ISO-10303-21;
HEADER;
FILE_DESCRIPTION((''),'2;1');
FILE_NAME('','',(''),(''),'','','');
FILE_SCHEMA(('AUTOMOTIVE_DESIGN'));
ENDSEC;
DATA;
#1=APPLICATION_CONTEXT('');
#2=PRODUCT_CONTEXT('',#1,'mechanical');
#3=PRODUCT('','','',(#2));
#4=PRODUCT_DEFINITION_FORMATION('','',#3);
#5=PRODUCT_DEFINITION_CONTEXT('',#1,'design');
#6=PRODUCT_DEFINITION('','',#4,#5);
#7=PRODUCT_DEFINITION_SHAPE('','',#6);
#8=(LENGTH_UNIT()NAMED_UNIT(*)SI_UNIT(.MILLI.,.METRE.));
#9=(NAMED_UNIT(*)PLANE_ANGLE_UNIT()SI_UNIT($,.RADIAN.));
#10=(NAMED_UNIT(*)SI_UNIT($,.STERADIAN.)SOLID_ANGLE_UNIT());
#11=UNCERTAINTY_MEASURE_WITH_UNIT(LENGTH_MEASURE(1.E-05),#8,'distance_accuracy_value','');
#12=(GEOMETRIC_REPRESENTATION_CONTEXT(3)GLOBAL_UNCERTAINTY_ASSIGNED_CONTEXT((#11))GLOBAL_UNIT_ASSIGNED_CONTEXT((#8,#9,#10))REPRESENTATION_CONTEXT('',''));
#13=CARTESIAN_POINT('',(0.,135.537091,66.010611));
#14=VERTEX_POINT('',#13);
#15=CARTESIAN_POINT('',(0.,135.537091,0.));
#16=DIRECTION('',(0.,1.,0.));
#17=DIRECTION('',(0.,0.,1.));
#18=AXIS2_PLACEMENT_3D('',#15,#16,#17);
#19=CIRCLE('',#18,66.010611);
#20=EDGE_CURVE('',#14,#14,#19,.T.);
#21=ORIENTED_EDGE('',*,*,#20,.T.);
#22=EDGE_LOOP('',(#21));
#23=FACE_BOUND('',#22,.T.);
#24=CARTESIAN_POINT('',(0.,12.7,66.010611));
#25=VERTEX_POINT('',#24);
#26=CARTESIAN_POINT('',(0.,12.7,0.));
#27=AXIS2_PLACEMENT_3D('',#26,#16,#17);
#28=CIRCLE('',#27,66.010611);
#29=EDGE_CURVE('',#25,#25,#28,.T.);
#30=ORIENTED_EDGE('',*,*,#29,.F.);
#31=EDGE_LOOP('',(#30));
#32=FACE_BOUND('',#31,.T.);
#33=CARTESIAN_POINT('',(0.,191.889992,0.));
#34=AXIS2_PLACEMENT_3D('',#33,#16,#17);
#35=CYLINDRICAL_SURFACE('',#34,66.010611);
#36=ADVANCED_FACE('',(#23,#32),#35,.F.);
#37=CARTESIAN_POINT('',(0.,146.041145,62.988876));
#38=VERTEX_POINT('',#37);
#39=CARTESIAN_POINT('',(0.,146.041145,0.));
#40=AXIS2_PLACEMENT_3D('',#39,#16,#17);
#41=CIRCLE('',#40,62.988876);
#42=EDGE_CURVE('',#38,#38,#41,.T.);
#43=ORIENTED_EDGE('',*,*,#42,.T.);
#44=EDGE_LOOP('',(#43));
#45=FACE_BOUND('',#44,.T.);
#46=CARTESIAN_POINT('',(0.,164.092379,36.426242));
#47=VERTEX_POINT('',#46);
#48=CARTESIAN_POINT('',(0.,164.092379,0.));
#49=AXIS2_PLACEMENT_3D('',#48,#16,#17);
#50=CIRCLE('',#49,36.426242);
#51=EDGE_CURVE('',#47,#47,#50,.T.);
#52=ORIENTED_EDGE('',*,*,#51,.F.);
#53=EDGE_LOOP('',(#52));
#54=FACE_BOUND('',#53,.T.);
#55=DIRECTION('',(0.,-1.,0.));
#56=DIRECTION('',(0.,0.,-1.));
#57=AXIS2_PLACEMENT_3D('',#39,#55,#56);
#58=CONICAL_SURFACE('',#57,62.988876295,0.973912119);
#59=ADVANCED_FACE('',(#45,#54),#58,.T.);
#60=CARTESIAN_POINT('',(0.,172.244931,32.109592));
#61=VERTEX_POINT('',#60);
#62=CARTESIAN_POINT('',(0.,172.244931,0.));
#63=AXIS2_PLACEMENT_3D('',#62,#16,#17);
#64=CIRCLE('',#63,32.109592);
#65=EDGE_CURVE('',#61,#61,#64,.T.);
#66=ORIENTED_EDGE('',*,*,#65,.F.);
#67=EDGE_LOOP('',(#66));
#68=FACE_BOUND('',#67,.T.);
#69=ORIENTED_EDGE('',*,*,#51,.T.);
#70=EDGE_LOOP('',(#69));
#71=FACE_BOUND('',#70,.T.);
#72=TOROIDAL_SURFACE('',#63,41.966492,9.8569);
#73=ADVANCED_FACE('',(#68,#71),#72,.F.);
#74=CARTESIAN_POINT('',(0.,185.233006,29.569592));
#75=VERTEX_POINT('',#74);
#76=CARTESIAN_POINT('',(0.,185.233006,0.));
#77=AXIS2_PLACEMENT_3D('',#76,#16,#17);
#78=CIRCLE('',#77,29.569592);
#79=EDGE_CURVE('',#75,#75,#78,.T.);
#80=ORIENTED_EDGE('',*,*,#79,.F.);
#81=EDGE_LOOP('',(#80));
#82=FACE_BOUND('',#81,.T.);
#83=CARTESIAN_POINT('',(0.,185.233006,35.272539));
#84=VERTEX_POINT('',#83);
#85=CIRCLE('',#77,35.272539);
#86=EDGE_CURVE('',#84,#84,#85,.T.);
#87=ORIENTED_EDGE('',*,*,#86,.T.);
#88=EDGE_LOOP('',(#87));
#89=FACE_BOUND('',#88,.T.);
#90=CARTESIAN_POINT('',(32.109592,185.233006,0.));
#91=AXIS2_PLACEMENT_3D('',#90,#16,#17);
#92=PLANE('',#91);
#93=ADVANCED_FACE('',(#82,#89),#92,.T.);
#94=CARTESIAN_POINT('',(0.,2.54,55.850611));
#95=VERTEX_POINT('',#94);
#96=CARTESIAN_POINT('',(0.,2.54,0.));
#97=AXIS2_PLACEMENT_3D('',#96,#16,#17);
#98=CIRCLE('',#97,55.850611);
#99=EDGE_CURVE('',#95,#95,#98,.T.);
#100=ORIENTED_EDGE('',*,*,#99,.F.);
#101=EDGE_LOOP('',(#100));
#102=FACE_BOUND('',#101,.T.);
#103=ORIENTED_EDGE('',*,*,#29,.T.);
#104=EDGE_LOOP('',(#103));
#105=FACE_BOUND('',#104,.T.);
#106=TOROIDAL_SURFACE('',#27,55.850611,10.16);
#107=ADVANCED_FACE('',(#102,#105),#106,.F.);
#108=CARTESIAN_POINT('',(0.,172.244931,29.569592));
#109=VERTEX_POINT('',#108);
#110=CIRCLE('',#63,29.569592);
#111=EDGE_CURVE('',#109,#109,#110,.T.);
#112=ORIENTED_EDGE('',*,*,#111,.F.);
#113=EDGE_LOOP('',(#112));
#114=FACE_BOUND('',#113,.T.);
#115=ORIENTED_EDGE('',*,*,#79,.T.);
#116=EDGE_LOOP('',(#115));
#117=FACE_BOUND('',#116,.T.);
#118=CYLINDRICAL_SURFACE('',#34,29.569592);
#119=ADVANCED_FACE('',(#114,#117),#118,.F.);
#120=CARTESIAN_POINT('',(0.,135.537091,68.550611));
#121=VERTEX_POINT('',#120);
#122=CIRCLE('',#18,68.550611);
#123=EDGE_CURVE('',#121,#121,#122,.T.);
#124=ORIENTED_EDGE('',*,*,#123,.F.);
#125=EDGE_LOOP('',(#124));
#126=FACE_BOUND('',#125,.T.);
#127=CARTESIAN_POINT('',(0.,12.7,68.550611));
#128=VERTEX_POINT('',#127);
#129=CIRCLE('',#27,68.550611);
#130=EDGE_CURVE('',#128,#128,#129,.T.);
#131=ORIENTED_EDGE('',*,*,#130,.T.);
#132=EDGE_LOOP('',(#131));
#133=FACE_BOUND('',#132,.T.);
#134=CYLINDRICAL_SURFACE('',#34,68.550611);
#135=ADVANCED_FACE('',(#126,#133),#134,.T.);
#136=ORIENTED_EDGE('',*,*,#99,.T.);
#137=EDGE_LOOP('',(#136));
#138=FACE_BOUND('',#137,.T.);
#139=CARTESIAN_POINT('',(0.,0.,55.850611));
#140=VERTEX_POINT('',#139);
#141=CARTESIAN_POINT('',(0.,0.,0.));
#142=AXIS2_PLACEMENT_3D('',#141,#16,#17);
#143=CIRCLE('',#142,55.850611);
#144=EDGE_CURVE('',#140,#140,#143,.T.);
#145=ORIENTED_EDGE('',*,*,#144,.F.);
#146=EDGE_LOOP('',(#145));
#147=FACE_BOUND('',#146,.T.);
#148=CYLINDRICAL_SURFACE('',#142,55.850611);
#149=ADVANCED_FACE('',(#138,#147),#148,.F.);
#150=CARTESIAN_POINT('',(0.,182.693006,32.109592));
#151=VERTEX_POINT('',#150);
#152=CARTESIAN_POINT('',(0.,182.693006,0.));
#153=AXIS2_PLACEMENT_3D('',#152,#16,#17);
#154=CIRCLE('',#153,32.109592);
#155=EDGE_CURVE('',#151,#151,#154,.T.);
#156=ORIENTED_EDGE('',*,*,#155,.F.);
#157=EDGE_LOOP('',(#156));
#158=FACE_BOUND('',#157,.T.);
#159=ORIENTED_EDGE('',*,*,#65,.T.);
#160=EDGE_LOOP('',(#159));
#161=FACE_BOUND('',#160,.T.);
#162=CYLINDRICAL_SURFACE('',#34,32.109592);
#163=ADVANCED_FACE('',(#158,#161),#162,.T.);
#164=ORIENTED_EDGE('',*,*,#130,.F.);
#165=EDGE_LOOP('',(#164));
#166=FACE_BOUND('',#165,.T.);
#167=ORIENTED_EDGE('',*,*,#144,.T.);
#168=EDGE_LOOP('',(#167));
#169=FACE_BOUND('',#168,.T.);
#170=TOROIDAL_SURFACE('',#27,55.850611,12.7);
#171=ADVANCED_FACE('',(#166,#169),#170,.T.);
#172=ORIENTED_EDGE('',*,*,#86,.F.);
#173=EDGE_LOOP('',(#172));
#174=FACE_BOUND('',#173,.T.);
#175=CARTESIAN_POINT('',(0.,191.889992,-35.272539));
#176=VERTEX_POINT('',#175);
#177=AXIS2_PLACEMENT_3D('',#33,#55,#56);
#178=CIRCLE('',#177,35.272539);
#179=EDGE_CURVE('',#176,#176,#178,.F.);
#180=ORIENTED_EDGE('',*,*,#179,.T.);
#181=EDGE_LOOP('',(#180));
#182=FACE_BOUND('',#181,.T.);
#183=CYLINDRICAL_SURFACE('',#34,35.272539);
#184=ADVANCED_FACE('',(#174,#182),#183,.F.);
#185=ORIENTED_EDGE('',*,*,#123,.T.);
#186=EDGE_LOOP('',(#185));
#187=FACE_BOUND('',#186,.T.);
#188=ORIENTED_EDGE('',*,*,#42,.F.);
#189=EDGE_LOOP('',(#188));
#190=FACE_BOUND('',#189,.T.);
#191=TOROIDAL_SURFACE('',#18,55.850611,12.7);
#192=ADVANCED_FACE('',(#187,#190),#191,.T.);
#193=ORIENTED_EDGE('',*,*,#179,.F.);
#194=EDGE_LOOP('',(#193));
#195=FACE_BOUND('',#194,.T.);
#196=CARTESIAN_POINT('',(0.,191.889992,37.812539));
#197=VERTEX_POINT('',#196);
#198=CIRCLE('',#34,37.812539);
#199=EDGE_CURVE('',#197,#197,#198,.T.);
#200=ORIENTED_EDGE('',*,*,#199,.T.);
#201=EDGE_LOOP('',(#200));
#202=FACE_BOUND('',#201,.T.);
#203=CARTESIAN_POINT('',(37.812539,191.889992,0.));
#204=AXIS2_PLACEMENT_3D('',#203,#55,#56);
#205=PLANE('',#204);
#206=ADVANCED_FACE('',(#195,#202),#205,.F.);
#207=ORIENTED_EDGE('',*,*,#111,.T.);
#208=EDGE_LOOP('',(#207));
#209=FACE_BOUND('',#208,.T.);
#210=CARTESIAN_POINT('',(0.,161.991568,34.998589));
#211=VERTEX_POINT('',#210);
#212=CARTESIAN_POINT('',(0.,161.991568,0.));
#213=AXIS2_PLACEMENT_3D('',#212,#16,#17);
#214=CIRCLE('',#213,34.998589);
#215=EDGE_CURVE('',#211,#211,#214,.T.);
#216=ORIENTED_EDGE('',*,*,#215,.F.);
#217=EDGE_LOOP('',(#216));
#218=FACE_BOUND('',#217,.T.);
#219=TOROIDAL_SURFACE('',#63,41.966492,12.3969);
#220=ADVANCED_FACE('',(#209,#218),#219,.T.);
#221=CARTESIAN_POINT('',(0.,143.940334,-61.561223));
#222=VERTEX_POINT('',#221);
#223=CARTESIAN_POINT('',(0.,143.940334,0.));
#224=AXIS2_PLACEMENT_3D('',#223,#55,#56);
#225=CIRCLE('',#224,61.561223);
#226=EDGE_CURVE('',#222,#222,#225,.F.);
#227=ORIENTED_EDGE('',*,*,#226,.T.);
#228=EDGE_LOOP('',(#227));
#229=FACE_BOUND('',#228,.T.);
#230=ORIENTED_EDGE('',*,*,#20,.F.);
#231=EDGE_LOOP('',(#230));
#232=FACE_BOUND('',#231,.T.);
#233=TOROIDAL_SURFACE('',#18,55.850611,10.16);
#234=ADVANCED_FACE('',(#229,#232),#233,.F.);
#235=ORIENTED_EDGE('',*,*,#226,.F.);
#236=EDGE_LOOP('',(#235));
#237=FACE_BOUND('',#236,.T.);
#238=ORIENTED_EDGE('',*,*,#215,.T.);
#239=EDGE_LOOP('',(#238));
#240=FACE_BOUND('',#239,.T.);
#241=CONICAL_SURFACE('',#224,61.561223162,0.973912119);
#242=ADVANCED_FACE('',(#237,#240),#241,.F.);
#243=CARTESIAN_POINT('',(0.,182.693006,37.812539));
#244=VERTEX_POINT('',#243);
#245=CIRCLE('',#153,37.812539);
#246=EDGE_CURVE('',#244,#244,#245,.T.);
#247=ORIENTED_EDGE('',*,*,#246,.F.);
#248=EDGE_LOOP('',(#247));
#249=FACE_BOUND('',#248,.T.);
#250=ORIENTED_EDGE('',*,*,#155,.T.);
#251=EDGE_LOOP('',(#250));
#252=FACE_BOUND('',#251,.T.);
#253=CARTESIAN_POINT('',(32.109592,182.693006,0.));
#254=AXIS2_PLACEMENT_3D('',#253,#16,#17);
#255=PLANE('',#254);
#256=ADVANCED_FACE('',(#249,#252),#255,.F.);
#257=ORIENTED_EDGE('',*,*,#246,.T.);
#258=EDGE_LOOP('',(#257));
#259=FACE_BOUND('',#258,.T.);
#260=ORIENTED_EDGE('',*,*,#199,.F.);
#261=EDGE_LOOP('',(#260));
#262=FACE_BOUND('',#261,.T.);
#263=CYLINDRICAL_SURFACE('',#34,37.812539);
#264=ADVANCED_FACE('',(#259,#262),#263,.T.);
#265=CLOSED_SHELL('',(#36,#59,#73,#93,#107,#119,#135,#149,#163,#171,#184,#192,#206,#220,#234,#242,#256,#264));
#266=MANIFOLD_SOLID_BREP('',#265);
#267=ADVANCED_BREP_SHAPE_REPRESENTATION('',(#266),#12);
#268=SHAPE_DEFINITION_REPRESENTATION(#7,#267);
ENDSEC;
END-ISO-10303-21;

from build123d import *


# Read off the part's stored shape, not the designer's step: Shell1
with BuildPart() as part:
    # Sketch1 → Revolve1 (revolve)
    with BuildSketch(Plane.XY, mode=Mode.PRIVATE) as revolve1_sk:
        with BuildLine():
            Line((0, 0), (55.850610629, 0))
            ThreePointArc((55.850610629, 0), (64.83086675, 3.719743879), (68.550610629, 12.7))
            Line((68.550610629, 12.7), (68.550610629, 135.537090781))
            ThreePointArc((68.550610629, 135.537090781), (67.07437947, 141.479902659), (62.988876295, 146.041145392))
            Line((62.988876295, 146.041145392), (36.426242146, 164.092378593))
            ThreePointArc((36.426242146, 164.092378593), (33.255344861, 167.632513451), (32.109591896, 172.244930881))
            Line((32.109591896, 172.244930881), (32.109591896, 182.693006016))
            Line((32.109591896, 182.693006016), (37.812538782, 182.693006016))
            Line((37.812538782, 182.693006016), (37.812538782, 191.889991998))
            Line((37.812538782, 191.889991998), (0, 191.889991998))
            Line((0, 191.889991998), (0, 0))
        make_face()
    revolve(revolve1_sk.sketch.rotate(Axis((0, 191.889991998, 0), (0, -1, 0)), 90), axis=Axis((0, 191.889991998, 0), (0, -1, 0)))

    # Shell1 outline → Shell1 (revolve, cut)
    with BuildSketch(Plane.XY):
        with BuildLine():
            Line((55.850610629, 0), (55.850610629, 2.54))
            ThreePointArc((55.850610629, 2.54), (63.034815526, 5.515795103), (66.010610629, 12.7))
            Line((66.010610629, 12.7), (66.010610629, 135.537090781))
            ThreePointArc((66.010610629, 135.537090781), (64.829625702, 140.291340284), (61.561223162, 143.94033447))
            Line((61.561223162, 143.94033447), (34.998589013, 161.991567671))
            ThreePointArc((34.998589013, 161.991567671), (31.010591093, 166.443951075), (29.569591896, 172.244930881))
            Line((29.569591896, 172.244930881), (29.569591896, 185.233006016))
            Line((29.569591896, 185.233006016), (35.272538782, 185.233006016))
            Line((35.272538782, 185.233006016), (35.272538782, 191.889991998))
            Line((35.272538782, 191.889991998), (0, 191.889991998))
            Line((0, 191.889991998), (0, 0))
            Line((0, 0), (55.850610629, 0))
        make_face()
    revolve(axis=Axis((0, 0, 0), (0, 1, 0)), mode=Mode.SUBTRACT)


solid = part.part
